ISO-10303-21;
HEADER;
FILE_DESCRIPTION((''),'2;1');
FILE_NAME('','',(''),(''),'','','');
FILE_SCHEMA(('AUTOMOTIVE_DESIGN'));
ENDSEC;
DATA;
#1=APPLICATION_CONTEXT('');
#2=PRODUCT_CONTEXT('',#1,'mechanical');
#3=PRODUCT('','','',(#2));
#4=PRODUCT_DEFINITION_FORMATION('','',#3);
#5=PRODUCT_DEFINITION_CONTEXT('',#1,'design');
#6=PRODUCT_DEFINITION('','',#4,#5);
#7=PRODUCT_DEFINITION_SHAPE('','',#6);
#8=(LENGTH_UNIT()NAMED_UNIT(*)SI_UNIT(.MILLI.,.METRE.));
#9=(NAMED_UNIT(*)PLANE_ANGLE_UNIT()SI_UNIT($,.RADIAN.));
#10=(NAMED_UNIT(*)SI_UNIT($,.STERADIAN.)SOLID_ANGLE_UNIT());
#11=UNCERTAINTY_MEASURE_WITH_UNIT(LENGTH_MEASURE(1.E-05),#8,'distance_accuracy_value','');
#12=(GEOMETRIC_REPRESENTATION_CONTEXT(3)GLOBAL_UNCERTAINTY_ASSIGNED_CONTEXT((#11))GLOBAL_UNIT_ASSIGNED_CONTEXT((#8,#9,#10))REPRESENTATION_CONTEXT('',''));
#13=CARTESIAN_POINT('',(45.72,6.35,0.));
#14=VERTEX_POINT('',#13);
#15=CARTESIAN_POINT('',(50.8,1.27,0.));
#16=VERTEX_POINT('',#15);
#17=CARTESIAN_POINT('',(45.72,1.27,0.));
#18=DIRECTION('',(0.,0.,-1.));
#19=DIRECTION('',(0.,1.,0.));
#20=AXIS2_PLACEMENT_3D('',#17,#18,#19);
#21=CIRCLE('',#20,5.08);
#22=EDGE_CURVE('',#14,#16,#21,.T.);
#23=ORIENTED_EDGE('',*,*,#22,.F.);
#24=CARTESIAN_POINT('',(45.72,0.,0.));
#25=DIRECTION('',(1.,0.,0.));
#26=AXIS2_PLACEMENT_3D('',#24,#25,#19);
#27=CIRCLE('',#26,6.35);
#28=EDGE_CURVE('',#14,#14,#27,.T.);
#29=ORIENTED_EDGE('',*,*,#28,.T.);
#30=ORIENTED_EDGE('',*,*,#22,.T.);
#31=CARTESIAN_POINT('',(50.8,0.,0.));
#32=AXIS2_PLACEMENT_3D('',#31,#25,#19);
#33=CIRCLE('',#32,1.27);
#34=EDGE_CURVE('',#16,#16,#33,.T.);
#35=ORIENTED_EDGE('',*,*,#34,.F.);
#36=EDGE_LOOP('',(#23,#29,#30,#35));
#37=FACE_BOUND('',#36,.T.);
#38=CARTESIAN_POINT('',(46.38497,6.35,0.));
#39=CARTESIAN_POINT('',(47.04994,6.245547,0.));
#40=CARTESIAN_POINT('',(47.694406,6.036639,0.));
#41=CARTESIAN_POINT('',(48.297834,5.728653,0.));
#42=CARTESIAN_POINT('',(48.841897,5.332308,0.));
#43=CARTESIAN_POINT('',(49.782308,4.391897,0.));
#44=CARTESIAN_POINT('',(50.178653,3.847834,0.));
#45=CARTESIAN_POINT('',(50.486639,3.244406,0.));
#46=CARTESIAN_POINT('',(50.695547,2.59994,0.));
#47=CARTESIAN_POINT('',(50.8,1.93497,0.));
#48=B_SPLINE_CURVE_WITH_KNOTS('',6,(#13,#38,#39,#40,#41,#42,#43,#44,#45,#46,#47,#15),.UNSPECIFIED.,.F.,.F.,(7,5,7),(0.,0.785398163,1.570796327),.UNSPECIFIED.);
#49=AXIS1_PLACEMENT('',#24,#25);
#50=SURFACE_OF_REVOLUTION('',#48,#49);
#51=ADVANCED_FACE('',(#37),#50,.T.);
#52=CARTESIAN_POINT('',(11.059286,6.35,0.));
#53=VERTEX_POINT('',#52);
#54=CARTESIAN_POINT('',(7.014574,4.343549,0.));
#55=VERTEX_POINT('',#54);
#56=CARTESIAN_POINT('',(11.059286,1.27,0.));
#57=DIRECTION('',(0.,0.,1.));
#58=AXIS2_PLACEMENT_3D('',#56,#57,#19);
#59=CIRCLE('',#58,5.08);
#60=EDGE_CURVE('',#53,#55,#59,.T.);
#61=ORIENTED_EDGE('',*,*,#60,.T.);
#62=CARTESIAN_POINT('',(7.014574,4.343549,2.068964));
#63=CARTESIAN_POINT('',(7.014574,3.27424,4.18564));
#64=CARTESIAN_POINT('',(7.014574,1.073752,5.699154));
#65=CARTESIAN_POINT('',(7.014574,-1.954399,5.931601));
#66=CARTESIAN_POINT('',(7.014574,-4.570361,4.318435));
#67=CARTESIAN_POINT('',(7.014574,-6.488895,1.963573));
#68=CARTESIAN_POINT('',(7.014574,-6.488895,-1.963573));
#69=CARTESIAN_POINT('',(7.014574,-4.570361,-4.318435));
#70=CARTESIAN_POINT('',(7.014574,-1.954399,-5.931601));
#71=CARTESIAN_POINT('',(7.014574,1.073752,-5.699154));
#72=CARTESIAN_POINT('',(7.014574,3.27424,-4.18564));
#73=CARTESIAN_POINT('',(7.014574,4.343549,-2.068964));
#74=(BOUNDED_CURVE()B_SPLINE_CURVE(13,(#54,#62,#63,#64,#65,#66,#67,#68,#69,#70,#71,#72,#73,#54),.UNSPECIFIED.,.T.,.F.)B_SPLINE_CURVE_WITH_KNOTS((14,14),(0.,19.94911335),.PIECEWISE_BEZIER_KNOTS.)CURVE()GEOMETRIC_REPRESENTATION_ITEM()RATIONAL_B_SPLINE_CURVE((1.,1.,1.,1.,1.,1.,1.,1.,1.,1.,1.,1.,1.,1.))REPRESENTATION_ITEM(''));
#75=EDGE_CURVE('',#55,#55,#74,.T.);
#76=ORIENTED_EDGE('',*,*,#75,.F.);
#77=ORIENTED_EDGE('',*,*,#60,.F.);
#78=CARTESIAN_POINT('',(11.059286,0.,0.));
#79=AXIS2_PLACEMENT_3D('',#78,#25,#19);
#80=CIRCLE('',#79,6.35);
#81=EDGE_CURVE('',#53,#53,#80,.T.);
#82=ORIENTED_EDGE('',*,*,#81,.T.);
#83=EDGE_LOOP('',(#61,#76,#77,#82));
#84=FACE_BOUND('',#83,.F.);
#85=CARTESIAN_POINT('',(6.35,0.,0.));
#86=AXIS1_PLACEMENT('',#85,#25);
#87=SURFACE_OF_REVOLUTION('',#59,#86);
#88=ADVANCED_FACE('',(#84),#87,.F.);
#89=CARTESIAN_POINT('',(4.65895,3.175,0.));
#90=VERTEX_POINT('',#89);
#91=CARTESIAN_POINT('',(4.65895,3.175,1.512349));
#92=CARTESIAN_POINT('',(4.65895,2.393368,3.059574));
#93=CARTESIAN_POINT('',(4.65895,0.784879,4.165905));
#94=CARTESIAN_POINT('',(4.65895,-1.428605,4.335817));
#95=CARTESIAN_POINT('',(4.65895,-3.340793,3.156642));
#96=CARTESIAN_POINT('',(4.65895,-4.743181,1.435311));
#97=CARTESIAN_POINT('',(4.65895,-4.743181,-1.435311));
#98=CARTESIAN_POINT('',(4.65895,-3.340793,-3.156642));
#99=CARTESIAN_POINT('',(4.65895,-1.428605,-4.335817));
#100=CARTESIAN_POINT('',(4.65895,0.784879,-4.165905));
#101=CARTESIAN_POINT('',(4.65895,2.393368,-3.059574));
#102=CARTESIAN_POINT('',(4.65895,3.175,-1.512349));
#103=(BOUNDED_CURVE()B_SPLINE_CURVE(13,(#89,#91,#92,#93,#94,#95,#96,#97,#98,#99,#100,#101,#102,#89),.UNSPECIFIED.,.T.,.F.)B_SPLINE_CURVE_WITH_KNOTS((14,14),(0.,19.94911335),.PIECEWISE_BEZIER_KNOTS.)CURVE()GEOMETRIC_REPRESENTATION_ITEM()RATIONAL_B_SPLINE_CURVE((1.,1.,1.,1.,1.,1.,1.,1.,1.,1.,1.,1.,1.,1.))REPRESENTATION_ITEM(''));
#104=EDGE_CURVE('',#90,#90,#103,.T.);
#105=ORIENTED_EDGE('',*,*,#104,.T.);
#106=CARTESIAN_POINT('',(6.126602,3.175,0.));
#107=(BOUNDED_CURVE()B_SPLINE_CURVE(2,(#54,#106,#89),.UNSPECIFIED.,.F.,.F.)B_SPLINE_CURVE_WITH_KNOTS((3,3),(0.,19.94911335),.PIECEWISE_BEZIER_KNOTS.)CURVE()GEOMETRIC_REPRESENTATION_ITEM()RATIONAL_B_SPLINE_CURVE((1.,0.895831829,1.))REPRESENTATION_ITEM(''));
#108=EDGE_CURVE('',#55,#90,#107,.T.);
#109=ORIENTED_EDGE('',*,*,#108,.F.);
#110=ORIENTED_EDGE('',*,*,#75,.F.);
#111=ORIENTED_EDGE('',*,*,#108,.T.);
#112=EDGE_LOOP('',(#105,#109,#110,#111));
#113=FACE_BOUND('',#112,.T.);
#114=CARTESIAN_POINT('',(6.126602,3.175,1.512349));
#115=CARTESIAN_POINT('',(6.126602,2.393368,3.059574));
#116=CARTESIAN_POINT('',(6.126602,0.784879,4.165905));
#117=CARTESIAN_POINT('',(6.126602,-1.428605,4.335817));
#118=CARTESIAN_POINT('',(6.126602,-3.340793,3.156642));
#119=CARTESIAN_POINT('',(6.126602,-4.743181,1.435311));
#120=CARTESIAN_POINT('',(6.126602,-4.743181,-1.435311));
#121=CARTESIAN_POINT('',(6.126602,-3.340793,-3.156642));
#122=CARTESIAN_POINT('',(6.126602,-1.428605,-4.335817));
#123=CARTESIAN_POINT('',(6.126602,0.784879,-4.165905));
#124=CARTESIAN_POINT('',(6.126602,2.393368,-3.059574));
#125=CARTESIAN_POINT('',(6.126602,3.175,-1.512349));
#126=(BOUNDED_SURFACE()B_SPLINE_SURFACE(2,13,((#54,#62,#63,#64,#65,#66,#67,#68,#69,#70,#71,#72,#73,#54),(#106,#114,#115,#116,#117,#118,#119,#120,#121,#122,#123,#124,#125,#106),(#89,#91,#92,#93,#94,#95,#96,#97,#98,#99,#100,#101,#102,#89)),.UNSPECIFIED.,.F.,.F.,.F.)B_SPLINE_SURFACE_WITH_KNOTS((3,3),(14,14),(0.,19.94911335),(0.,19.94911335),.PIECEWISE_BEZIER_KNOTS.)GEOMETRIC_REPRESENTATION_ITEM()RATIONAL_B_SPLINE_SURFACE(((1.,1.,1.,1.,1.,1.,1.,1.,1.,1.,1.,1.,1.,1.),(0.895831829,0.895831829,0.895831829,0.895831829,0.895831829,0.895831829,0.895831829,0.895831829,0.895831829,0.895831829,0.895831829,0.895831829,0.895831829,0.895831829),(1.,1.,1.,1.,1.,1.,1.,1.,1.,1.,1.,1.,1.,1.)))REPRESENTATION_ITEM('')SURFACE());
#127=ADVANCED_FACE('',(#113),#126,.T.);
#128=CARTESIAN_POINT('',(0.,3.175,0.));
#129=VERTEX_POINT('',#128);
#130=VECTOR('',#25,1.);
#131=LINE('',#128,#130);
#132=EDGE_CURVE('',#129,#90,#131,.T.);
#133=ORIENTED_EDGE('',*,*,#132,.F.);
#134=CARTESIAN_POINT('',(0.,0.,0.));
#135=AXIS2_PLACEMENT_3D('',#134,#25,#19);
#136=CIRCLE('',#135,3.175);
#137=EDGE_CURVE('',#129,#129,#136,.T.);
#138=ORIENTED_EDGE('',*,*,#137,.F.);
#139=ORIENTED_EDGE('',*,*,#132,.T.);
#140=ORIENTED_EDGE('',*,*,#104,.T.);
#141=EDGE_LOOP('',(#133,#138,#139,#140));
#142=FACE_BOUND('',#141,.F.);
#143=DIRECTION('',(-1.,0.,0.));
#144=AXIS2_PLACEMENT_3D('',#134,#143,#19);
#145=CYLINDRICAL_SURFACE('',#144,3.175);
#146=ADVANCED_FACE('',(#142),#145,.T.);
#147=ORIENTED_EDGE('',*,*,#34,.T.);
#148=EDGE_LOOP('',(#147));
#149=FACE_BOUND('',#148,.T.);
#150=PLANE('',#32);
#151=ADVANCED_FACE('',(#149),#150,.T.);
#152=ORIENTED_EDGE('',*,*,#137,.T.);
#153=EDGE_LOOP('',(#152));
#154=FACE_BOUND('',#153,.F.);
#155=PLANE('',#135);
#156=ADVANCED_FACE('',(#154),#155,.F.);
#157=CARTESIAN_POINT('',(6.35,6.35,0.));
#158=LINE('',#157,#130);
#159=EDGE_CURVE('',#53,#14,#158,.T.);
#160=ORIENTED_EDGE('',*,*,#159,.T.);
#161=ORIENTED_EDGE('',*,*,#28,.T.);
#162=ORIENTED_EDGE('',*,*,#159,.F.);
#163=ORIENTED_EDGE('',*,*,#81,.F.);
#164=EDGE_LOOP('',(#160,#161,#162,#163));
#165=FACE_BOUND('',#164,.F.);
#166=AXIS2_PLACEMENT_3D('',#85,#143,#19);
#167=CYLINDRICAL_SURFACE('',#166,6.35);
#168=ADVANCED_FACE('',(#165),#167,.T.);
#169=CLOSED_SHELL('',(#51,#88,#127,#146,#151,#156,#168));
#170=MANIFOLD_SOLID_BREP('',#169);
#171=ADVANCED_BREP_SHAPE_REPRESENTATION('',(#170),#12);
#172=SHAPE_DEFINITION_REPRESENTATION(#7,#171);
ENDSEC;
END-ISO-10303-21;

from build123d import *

# Parameters (mm, degrees)
F0_R     = 3.175
F1_DEPTH = 6.35
F2_R     = 6.35
F3_DEPTH = 44.45
F4_R     = 5.08
F6_R     = 2.9585715778


# Not quite as in the source:
# - a fillet or chamfer that OpenCascade refuses, or shapes differently, is made with other operations: its cross-section is extruded or revolved along the edge and cut away or added


with BuildPart() as f1:
    # F0 (on Right) → F1 (new body)
    with BuildSketch(Plane.YZ):
        Circle(F0_R)
    extrude(amount=F1_DEPTH)

    # F2 (on face) → F3 (join)
    with BuildSketch(Plane.YZ.offset(6.35)):
        Circle(F2_R)
    extrude(amount=F3_DEPTH)

    # F4
    f4_edges = [f1.edges().sort_by_distance(p)[0] for p in [
        (50.8, -6.35, 0),
    ]]
    fillet(f4_edges, radius=F4_R)

    # F5: fillet of radius 5.08 on 1 edges, made by hand

    # F5_s1 → F5_t2 (revolve, cut)
    with BuildSketch(Plane.XY):
        with BuildLine():
            ThreePointArc((11.0592860393, 6.35), (8.2194797079, 5.4821134838), (6.35, 3.175))
            Line((6.35, 3.175), (6.35, 6.35))
            Line((6.35, 6.35), (11.0592860393, 6.35))
        make_face()
    revolve(axis=Axis((6.35, 0, 0), (1, 0, 0)), mode=Mode.SUBTRACT)

    # F6
    f6_edges = [f1.edges().sort_by_distance(p)[0] for p in [
        (6.35, -3.175, 0),
    ]]
    fillet(f6_edges, radius=F6_R)


solid = f1.part
